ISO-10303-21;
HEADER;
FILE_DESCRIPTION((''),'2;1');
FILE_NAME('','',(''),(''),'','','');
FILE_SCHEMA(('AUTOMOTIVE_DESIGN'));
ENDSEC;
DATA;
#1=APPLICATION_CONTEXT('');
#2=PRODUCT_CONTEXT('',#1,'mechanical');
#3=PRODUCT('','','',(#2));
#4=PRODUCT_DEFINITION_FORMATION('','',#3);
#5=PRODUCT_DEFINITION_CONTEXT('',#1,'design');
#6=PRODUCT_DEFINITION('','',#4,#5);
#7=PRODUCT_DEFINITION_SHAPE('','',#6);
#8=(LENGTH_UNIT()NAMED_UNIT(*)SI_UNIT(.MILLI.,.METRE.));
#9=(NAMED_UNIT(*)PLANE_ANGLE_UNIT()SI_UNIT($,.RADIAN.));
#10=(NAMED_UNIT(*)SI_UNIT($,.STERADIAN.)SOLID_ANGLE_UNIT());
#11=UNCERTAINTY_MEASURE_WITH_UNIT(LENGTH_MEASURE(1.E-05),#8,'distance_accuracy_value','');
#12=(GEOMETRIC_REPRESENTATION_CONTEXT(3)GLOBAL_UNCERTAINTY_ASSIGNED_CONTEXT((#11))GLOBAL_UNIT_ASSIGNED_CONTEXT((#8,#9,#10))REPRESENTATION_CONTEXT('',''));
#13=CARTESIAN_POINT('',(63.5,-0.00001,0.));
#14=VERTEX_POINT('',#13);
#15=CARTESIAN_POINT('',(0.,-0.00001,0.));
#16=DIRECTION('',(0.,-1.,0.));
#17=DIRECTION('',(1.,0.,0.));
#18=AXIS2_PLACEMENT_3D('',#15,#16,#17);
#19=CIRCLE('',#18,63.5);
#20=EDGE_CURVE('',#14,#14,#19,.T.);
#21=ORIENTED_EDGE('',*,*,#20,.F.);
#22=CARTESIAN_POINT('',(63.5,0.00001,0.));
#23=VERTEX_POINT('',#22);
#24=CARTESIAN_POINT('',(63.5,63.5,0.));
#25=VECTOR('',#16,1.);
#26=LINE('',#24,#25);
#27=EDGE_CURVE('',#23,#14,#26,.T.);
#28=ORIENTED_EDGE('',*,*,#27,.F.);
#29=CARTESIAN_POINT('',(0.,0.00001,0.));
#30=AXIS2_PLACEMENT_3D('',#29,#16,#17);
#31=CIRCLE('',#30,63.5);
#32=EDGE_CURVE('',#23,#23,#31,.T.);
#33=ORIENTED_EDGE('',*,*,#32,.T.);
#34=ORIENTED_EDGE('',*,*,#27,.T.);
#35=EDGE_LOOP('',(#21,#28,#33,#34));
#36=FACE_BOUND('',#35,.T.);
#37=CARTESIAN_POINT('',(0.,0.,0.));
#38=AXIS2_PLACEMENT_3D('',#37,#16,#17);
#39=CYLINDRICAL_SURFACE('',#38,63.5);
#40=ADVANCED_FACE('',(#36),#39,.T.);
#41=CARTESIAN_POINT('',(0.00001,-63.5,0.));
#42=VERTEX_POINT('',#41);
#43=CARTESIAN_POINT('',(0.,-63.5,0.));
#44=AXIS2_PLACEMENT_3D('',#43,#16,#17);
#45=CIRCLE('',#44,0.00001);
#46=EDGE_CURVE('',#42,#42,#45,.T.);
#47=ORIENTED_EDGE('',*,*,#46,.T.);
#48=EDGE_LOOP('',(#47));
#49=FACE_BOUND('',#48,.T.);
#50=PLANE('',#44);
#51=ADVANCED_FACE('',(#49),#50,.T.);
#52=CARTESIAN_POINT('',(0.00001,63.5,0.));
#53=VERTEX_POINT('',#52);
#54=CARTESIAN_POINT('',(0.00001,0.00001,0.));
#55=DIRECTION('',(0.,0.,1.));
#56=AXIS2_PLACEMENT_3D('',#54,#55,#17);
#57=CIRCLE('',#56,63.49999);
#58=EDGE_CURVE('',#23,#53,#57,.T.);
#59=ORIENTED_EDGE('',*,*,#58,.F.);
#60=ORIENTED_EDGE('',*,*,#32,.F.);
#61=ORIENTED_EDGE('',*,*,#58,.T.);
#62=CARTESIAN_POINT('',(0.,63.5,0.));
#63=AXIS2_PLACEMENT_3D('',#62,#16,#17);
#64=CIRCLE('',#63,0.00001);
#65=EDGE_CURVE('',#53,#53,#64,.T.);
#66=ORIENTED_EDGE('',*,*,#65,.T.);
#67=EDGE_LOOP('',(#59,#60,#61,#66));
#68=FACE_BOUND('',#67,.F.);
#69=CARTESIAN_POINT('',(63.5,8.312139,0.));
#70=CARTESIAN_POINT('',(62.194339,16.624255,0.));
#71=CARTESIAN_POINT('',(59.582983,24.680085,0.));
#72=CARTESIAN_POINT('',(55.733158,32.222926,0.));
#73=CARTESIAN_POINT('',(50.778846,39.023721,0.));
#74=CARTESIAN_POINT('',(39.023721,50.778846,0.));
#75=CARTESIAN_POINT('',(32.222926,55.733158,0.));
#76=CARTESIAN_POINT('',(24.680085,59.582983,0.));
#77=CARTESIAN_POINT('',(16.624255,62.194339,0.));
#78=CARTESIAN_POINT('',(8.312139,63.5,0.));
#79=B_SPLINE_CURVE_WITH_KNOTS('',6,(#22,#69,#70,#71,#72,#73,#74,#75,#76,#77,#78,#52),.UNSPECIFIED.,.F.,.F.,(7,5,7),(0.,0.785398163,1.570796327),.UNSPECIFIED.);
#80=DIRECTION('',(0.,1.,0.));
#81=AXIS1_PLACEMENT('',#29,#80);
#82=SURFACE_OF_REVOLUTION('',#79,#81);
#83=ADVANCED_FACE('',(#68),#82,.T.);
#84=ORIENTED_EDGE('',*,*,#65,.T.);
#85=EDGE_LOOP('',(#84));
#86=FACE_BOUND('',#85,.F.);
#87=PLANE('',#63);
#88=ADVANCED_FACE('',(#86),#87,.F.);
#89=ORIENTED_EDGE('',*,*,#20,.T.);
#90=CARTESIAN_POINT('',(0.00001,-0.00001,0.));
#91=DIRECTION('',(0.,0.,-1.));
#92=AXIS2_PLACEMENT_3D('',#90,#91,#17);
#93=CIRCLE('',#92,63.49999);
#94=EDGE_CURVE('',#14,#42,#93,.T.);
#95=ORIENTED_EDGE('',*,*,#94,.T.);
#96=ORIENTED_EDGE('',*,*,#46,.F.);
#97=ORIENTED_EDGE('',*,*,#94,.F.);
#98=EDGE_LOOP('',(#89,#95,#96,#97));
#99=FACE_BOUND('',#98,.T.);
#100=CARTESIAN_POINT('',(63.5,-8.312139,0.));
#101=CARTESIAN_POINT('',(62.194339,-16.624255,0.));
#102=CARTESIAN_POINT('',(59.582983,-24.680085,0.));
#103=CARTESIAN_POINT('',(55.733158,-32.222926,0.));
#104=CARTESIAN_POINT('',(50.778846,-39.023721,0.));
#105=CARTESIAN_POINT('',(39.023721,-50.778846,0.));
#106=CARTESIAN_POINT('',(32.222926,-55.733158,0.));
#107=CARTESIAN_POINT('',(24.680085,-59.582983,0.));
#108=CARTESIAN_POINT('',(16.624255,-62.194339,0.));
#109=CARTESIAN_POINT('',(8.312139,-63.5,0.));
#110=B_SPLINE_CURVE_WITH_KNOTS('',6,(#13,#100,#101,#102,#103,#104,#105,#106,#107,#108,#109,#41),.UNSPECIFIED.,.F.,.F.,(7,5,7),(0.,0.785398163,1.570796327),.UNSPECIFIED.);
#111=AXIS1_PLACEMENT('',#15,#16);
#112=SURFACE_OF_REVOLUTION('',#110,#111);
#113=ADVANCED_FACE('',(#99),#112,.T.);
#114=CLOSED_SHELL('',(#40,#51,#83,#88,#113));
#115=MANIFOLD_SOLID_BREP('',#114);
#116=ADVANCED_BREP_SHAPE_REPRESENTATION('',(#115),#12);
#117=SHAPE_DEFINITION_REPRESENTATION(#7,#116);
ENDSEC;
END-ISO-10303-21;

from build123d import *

# Parameters (mm, degrees)
F0_R     = 63.5
F1_DEPTH = 63.5
F2_R     = 63.49999


# Not quite as in the source:
# - a fillet or chamfer is up to 0.001 mm smaller than in the source, because OpenCascade refuses the exact size


with BuildPart() as f1:
    # F0 (on Front) → F1 (new body, symmetric)
    with BuildSketch(Plane.XZ):
        Circle(F0_R)
    extrude(amount=F1_DEPTH, both=True)

    # F2 (radius 63.5 in the source; OpenCascade refuses exactly that, so slightly less here)
    f2_edges = [f1.edges().sort_by_distance(p)[0] for p in [
        (-63.5, 63.5, 0),
        (63.5, 0, 0),
        (-63.5, -63.5, 0),
    ]]
    fillet(f2_edges, radius=F2_R)


solid = f1.part
